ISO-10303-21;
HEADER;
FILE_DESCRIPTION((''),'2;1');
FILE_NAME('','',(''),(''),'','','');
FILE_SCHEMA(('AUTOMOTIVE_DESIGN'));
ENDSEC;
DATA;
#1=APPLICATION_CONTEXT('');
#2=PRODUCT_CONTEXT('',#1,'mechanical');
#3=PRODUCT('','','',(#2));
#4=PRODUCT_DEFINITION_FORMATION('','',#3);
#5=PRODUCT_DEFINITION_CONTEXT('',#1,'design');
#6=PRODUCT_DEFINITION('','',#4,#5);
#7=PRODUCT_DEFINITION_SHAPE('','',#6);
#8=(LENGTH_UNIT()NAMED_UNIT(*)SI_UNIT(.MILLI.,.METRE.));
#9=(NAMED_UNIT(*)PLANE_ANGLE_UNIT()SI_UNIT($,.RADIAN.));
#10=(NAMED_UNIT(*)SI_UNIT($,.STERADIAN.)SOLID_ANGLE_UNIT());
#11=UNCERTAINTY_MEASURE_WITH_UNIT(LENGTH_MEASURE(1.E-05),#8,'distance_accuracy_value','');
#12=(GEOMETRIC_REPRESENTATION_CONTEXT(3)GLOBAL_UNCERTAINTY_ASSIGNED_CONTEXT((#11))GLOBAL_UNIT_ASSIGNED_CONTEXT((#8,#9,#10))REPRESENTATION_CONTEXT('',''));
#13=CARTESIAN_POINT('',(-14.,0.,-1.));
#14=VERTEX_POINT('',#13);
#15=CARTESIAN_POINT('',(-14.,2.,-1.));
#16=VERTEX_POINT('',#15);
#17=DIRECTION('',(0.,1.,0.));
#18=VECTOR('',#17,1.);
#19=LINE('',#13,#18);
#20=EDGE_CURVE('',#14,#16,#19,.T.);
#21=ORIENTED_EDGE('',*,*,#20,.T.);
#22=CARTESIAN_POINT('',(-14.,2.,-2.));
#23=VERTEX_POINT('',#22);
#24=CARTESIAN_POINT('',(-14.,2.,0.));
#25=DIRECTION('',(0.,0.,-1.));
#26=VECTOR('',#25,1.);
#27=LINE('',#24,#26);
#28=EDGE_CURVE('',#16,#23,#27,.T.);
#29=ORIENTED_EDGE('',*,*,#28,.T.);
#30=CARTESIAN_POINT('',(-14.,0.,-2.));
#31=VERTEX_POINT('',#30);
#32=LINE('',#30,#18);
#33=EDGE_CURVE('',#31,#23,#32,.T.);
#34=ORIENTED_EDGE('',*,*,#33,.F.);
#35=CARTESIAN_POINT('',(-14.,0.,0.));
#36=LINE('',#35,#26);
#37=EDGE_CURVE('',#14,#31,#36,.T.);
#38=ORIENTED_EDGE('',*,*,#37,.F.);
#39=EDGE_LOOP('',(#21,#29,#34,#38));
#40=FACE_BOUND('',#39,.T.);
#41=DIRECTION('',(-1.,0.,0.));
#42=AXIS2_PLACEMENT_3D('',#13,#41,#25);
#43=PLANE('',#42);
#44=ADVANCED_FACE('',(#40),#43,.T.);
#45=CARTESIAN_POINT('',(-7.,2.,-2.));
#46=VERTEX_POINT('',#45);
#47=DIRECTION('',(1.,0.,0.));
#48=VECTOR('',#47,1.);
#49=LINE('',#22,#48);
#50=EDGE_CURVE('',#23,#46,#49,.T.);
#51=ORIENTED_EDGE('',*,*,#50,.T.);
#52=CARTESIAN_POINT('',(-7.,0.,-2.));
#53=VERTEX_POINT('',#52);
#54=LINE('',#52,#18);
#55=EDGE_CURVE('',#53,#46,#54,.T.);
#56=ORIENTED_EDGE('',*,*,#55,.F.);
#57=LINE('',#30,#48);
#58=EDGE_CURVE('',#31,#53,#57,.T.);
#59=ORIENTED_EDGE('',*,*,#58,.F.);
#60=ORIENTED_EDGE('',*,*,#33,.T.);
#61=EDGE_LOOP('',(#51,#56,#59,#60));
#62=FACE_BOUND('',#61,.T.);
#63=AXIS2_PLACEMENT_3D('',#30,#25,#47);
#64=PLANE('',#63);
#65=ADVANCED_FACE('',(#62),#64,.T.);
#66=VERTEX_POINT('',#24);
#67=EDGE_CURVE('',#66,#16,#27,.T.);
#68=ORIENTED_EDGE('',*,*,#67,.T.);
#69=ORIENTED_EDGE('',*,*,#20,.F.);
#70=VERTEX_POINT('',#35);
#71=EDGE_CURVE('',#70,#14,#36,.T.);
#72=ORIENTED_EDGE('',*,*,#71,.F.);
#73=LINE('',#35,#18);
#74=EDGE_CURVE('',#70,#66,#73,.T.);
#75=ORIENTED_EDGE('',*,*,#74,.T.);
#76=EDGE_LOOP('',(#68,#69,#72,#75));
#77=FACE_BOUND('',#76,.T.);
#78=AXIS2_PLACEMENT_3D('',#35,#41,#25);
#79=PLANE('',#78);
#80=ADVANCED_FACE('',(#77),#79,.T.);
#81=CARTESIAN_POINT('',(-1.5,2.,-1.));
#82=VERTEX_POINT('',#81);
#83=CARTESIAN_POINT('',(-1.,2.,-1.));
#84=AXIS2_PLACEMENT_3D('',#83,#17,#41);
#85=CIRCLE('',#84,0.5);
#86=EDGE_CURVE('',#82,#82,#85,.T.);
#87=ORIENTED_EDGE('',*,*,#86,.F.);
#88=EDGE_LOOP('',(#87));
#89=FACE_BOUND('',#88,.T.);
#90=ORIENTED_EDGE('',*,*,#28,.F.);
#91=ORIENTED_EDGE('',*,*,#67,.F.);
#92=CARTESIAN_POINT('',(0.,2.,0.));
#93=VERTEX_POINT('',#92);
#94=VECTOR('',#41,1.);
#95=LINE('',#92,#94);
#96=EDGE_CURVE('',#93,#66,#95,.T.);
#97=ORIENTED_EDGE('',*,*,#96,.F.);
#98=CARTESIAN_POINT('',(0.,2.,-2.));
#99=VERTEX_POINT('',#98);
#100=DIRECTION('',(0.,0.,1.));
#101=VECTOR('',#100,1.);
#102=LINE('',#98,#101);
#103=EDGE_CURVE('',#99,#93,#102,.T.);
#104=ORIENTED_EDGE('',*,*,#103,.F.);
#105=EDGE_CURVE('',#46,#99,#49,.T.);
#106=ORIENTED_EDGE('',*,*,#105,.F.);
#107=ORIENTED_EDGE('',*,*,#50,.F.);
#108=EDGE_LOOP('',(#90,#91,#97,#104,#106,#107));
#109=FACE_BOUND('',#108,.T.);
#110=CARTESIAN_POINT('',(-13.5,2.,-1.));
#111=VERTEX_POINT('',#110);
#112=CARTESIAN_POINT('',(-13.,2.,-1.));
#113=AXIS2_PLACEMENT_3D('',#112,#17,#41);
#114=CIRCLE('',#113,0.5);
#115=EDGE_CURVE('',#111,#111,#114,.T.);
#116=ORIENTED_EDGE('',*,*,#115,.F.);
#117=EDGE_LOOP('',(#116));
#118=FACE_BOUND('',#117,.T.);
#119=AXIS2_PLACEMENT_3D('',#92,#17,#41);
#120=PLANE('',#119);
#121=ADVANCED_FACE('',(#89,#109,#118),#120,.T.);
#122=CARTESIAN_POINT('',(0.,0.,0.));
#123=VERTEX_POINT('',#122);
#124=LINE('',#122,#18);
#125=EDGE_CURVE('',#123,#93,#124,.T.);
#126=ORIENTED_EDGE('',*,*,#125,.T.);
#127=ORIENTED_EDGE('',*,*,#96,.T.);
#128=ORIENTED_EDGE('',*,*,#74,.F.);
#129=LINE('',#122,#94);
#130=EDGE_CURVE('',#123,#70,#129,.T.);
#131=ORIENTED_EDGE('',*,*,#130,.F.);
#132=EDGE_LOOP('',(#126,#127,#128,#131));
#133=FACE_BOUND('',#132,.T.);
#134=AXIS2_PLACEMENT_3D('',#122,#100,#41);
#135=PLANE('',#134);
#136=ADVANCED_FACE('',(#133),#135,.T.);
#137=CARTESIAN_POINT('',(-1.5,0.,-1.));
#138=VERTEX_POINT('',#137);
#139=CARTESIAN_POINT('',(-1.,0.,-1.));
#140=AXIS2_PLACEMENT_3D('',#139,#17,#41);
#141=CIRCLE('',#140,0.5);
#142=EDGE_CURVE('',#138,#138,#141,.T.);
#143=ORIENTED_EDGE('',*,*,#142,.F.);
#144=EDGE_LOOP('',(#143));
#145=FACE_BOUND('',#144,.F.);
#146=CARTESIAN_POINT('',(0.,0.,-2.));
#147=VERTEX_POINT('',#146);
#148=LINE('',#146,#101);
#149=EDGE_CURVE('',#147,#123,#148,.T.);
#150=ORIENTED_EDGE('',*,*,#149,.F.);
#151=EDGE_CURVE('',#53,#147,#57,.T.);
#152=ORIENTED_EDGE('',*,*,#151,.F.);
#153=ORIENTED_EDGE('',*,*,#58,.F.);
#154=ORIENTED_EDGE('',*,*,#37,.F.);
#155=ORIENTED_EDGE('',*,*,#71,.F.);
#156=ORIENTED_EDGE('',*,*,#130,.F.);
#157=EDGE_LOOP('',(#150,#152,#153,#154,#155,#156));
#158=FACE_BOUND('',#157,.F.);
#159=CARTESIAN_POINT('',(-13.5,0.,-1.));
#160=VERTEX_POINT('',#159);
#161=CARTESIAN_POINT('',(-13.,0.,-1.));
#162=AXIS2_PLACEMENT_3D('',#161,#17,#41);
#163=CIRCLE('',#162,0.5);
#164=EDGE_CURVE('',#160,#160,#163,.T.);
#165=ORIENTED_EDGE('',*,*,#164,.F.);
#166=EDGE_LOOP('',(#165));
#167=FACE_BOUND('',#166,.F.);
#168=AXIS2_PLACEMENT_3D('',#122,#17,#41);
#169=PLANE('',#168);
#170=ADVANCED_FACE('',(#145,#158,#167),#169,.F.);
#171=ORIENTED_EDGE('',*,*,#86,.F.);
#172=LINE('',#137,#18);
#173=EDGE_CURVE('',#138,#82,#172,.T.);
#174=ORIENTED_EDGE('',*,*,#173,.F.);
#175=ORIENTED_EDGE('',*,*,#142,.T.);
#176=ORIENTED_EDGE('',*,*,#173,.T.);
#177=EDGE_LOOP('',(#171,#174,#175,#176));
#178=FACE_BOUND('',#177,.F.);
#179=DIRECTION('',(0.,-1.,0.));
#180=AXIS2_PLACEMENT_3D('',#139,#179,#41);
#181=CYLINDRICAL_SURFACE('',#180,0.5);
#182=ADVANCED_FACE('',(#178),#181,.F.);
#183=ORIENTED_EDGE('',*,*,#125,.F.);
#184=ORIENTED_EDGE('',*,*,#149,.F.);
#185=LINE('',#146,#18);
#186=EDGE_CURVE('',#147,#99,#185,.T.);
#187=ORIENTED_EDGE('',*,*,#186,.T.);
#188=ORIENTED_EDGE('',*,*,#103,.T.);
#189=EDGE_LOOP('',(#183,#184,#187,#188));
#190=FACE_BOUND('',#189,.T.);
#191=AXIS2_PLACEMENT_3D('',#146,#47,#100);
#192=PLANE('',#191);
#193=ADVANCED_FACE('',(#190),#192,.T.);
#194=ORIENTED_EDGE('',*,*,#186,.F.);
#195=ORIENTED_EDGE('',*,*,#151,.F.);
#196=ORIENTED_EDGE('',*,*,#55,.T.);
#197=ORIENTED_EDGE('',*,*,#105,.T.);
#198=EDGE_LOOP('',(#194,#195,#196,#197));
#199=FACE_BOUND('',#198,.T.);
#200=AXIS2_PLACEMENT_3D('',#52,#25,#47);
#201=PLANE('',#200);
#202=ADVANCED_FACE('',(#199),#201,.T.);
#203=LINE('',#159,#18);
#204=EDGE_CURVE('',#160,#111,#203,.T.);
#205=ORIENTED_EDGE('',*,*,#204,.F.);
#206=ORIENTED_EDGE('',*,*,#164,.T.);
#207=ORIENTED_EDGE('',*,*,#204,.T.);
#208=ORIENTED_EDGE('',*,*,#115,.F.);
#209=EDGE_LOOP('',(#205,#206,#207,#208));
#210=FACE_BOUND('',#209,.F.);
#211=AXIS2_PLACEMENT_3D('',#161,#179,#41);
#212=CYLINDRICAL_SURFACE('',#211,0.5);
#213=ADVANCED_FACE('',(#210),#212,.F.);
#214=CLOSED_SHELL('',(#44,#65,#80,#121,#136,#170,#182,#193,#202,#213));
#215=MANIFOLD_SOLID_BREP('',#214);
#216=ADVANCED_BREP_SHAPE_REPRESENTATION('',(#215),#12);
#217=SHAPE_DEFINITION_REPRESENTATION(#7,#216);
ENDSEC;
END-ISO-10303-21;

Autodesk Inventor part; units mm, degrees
ref_plane "YZ Plane" through (0, 0, 0) normal (1, 0, 0) x (0, 1, 0)
ref_plane "XZ Plane" through (0, 0, 0) normal (0, 1, 0) x (-1, 0, 0)
ref_plane "XY Plane" through (0, 0, 0) normal (0, 0, 1) x (1, 0, 0)
sketch "Sketch1" plane through (0, 0, 0) normal (0, 1, 0) x (-1, 0, 0)
  line L0 (0, 0) -> (14, 0)
  line L1 (14, 0) -> (14, -2)
  line L2 (14, -2) -> (0, -2)
  line L3 (0, -2) -> (0, 0)
  line L4 (14, -1) -> (13, -1)
  line L5 (7, -2) -> (7, -1)
  circle A0 centre (13, -1) radius 0.5
  circle A1 centre (1, -1) radius 0.5
  dimension "d0" = 14
  dimension "d1" = 2
  dimension "d2" = 1
  dimension "d3" = 1
extrude "Extrusion1" add sketch "Sketch1" along normal blind 2
properties part number "link_v3"
